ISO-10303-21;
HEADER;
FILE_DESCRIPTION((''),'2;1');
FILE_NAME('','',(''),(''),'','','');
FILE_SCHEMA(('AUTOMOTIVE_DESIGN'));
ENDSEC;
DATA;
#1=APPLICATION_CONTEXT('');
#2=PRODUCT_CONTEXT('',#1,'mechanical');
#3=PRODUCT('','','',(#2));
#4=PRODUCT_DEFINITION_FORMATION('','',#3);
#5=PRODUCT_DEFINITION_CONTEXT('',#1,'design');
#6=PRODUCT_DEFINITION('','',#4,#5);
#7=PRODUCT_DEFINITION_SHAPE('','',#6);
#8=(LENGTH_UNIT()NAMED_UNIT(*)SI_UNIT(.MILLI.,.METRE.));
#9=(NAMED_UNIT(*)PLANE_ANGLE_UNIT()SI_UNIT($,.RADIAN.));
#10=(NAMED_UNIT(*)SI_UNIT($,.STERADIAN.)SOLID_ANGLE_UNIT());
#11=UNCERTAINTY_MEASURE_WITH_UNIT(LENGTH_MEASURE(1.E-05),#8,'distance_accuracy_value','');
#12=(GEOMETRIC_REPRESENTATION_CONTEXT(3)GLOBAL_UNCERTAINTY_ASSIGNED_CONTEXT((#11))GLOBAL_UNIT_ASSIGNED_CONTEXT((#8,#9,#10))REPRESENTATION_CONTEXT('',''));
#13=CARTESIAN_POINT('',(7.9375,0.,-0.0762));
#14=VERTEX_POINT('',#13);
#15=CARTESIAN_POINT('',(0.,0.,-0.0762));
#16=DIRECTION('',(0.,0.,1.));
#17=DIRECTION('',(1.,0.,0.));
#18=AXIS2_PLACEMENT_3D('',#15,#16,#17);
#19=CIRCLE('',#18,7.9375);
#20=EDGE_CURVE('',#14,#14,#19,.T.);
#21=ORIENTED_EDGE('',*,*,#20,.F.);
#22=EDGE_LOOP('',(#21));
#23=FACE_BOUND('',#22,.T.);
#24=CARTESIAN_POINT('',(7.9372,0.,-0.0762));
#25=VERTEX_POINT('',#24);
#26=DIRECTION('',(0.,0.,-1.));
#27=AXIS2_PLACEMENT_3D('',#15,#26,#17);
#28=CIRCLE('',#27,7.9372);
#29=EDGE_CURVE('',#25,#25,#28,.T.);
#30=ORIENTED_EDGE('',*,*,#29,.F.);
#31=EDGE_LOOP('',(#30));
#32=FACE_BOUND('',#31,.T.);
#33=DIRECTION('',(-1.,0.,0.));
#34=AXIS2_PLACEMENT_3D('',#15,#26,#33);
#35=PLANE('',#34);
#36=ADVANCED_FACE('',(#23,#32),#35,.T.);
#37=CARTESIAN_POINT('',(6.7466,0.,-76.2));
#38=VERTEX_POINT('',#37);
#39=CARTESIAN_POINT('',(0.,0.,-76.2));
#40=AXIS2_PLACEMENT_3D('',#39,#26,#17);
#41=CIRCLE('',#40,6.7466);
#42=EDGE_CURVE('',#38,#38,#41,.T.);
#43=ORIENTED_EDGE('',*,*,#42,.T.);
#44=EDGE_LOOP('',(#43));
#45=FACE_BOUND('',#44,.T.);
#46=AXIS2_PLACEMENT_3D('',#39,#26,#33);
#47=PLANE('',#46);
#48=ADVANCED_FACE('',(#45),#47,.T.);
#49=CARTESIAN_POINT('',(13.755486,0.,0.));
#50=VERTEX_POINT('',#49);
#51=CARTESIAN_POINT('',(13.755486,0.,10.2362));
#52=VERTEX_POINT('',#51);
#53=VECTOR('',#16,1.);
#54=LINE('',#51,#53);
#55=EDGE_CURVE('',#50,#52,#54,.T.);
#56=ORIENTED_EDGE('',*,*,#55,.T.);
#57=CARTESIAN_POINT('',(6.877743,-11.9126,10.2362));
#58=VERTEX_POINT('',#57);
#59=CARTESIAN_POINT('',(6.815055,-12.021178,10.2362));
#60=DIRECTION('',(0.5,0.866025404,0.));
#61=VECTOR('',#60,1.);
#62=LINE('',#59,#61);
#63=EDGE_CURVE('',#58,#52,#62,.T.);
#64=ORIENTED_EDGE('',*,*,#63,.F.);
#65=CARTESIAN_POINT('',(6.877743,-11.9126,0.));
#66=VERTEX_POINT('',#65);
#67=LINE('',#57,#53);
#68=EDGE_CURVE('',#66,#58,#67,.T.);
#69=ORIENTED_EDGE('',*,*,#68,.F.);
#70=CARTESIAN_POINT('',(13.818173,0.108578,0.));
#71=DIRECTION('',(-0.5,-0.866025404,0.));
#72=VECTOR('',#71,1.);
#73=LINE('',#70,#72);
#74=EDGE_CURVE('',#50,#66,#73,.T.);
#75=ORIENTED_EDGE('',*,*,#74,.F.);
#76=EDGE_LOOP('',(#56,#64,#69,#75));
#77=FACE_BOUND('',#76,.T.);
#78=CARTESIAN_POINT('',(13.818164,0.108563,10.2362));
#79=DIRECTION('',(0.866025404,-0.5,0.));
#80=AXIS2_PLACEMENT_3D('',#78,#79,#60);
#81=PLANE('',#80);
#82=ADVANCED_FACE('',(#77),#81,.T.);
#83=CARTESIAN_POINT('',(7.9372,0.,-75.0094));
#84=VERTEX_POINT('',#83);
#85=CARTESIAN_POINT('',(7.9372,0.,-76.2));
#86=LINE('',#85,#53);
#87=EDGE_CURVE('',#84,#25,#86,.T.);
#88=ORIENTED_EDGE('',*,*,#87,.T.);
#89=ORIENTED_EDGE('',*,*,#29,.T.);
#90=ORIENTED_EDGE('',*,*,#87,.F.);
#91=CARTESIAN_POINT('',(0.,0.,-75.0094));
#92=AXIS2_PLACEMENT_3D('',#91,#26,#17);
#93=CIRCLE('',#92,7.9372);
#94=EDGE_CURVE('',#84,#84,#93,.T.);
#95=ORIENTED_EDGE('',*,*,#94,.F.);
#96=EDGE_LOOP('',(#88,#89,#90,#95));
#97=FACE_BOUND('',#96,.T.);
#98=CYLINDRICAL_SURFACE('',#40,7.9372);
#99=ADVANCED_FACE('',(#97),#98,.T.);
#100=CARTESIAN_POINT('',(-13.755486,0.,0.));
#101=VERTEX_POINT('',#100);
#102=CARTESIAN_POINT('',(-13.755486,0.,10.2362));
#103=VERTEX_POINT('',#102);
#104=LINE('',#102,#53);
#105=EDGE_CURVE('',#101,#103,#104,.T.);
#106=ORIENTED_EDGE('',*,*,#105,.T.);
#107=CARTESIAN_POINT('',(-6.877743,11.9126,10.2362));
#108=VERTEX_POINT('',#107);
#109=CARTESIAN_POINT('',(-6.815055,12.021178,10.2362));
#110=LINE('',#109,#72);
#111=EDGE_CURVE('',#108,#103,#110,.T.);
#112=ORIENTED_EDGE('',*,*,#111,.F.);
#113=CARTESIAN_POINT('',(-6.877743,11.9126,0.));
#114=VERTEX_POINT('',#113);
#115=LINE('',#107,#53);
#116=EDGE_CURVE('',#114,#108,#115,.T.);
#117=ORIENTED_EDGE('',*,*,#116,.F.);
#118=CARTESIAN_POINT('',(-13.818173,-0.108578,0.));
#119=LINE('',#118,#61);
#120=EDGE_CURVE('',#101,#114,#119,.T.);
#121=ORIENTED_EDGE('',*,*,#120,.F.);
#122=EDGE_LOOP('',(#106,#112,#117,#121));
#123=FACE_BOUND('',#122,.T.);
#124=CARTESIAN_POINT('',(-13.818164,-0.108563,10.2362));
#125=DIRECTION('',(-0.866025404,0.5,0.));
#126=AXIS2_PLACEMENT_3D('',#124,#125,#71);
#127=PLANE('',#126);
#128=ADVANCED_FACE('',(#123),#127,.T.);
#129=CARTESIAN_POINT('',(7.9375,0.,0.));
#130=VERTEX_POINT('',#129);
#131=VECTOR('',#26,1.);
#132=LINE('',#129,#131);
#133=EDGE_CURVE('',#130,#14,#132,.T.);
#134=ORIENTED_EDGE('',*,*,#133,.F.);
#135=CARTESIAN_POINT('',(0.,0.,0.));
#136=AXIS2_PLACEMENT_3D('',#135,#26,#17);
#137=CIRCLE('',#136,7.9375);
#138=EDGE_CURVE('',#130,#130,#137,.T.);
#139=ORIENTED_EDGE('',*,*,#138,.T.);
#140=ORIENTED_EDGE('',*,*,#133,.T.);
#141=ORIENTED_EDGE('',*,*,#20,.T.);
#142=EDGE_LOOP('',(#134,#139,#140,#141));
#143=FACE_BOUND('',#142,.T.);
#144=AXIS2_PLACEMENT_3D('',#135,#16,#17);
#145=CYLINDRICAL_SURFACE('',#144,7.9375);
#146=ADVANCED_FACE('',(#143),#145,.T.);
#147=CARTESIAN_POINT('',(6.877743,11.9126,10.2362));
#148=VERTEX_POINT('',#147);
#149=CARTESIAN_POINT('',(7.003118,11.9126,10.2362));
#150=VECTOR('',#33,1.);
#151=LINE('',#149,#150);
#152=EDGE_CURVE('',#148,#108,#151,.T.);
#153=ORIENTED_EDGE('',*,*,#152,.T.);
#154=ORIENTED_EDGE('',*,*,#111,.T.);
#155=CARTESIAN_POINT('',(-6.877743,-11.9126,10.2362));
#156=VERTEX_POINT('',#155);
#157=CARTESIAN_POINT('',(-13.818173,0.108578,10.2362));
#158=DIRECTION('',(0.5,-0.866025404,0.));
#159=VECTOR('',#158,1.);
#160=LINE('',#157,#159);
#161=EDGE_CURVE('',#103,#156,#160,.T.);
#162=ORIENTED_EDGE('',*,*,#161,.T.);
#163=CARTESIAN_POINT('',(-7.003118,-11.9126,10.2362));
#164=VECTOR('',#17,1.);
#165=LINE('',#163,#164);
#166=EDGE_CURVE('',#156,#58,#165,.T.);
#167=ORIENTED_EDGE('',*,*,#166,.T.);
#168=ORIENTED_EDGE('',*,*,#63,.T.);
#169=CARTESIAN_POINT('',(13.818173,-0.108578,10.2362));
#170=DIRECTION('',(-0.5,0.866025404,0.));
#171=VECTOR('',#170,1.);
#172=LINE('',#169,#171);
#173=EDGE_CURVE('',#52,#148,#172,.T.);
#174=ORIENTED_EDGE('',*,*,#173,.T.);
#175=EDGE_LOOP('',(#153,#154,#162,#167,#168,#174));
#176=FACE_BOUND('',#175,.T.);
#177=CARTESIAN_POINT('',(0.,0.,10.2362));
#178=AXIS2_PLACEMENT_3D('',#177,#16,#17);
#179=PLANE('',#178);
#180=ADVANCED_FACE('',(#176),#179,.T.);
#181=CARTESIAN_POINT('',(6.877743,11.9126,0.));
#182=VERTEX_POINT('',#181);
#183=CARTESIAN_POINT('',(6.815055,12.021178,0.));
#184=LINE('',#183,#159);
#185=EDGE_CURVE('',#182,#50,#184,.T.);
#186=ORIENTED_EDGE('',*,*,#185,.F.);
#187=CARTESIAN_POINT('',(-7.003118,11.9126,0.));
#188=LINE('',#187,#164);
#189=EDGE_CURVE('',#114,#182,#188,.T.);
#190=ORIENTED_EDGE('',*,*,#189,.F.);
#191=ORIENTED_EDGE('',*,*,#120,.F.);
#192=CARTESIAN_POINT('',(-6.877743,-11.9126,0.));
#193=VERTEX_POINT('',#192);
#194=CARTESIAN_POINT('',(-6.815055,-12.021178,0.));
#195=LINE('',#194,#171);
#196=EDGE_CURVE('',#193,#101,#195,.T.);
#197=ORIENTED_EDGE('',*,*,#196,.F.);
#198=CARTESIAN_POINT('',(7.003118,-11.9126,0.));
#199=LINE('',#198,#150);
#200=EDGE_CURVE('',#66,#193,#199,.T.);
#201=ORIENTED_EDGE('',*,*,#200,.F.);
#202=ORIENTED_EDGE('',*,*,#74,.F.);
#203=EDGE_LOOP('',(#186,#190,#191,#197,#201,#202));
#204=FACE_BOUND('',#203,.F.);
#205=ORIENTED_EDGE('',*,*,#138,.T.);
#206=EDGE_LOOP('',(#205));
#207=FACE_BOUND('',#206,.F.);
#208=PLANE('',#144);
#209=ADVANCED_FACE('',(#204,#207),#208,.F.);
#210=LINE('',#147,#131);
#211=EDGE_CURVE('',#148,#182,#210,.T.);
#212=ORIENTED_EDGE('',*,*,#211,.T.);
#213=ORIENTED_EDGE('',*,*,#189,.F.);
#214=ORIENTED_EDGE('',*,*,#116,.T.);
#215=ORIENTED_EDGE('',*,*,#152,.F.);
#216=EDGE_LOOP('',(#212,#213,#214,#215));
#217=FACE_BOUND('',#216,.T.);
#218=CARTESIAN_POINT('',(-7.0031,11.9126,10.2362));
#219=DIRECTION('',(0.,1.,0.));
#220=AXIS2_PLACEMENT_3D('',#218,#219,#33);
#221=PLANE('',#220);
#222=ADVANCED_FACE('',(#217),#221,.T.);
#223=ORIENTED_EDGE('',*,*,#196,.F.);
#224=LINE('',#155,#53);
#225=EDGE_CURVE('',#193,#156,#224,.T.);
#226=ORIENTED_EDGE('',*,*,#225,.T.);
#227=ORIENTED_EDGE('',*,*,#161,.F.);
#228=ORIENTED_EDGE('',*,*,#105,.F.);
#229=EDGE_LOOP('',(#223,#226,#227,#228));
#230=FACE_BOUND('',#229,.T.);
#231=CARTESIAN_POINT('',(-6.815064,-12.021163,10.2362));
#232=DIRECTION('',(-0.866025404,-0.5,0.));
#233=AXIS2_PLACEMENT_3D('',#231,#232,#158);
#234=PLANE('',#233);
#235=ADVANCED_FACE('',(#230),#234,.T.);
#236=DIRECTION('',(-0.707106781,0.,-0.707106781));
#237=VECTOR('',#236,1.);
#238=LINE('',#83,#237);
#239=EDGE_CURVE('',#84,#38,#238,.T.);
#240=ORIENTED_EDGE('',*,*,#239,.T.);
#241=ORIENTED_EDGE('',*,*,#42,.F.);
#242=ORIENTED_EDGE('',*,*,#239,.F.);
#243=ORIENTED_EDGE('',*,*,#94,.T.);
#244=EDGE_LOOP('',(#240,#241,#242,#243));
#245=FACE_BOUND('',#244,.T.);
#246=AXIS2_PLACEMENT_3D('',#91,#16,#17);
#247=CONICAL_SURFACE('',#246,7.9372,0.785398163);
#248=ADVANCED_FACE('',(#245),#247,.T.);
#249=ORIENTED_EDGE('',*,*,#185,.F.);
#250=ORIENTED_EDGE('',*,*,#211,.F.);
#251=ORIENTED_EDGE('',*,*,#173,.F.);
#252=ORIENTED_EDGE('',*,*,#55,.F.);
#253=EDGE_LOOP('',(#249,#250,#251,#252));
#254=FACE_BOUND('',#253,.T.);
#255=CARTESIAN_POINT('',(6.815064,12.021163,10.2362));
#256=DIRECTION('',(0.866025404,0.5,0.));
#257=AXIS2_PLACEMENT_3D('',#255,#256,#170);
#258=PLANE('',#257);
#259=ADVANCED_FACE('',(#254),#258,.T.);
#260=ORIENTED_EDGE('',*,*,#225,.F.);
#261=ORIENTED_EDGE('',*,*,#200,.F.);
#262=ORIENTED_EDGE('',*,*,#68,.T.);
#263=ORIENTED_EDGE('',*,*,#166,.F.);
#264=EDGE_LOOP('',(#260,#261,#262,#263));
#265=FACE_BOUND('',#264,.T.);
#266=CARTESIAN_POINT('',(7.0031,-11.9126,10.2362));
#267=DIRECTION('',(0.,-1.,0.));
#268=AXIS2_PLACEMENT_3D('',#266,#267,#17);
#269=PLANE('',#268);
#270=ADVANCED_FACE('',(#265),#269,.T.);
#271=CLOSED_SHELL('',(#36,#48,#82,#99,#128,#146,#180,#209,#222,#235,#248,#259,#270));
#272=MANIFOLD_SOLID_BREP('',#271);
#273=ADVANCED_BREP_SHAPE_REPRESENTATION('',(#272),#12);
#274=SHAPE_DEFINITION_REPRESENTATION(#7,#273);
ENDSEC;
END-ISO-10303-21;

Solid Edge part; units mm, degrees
sketch "Sketch1" plane through (0, 0, 0) normal (0, 0, 1) x (1, 0, 0)
  circle A0 centre (0, 0) radius 13.8186
  dimension "D1" = 27.6372
extrude "Protrusion1" add sketch "Sketch1" along normal blind 10.2362
sketch "Sketch2" plane through (0, 0, 0) normal (0, 0, -1) x (1, 0, 0)
  circle A0 centre (0, 0) radius 7.9375
extrude "Protrusion2" add sketch "Sketch2" along normal blind 76.2
sketch "Sketch3" plane through (0, 0, -76.2) normal (0, 0, -1) x (1, 0, 0)
  circle A0 centre (0, 0) radius 7.9372
extrude "Cutout1" cut sketch "Sketch3" against normal blind 76.1238 flip side to cut
chamfer "Chamfer_1" distance 1.1906 angle 45 1 edges at (-7.9372, 0, -76.2)
sketch "Sketch4" plane through (0, 0, 10.2362) normal (0, 0, 1) x (1, 0, 0)
  line L0 (-7.0031, 11.9126) -> (7.0031, 11.9126)
  dimension "D1" = 23.8252
extrude "Cutout2" cut sketch "Sketch4" against normal up to next material side at (0, 11.9626, 10.2362)
pattern_circular "Pattern1" count 6 over 360 about axis through (0, 0, 10.2362) along (0, 0, 1) of "Cutout2"
properties part number "146484"
